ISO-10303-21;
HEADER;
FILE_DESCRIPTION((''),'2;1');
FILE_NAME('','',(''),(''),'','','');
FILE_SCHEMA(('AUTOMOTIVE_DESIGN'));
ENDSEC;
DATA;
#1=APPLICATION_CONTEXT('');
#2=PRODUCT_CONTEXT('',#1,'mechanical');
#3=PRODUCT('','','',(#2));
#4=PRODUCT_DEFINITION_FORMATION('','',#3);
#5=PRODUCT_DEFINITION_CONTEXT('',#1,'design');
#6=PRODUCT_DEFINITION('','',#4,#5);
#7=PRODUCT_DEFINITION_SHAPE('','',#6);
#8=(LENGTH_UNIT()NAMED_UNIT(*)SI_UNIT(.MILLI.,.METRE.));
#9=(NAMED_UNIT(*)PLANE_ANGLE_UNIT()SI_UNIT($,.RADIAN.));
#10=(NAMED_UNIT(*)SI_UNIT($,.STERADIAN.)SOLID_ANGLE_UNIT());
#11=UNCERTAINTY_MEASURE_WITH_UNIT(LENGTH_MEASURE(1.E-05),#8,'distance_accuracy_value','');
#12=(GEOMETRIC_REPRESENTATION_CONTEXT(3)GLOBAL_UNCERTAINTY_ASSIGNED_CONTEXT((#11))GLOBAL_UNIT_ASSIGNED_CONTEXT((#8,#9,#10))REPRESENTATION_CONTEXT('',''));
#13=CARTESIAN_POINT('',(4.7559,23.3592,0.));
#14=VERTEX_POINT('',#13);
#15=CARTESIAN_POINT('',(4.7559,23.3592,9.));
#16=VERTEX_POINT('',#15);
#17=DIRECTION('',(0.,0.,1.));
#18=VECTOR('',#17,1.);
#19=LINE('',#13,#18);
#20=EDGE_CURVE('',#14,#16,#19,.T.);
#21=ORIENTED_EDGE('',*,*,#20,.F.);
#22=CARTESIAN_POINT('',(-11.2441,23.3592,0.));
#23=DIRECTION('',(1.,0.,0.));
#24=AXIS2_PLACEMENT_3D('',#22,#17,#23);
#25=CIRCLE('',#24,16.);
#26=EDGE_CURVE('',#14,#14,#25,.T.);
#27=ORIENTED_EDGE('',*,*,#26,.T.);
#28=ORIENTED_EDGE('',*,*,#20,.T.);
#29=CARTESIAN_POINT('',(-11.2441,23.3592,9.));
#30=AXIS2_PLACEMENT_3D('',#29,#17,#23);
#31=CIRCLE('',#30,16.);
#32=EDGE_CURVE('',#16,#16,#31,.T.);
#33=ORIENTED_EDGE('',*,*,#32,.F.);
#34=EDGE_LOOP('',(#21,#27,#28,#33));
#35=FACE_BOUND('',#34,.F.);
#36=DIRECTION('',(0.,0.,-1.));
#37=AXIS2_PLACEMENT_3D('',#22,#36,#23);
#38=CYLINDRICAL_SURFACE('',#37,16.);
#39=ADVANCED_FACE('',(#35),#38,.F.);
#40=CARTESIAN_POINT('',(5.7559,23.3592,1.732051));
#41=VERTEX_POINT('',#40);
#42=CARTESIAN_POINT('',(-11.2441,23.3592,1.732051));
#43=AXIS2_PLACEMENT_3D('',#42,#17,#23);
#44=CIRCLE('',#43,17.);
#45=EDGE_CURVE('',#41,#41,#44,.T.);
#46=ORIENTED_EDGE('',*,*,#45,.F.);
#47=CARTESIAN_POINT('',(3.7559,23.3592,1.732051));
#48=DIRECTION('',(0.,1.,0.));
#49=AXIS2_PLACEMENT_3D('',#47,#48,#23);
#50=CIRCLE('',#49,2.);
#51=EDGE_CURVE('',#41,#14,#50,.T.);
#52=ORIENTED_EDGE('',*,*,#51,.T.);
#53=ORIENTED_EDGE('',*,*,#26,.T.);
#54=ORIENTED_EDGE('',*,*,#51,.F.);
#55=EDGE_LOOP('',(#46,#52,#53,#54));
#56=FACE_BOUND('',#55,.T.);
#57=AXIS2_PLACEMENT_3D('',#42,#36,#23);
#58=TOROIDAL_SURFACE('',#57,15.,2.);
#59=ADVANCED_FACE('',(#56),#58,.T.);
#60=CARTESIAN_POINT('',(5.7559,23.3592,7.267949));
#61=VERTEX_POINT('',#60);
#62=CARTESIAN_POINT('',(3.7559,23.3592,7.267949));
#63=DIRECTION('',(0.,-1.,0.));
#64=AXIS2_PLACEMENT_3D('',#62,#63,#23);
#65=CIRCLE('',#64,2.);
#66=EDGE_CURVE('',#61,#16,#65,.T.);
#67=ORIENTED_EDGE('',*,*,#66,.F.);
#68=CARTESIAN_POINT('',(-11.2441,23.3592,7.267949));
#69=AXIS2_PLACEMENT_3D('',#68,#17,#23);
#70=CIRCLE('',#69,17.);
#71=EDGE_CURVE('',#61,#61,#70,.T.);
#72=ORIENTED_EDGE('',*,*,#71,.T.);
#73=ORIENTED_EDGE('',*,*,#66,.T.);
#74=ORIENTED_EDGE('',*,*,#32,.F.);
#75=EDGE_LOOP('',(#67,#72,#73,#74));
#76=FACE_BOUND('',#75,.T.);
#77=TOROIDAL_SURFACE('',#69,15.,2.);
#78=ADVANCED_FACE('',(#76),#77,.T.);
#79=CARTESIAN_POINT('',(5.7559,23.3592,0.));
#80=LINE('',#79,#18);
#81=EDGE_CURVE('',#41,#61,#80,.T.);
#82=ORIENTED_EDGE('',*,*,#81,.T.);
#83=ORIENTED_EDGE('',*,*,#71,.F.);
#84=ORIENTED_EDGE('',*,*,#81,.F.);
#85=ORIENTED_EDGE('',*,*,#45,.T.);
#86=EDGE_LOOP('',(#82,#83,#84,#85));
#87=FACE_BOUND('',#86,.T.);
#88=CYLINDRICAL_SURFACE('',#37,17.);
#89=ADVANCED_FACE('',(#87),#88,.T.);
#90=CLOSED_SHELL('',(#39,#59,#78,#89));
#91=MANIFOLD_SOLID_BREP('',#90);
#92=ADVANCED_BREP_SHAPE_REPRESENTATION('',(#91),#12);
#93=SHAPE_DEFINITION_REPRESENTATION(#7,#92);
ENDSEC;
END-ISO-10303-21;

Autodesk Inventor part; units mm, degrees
ref_plane "YZ Plane" through (0, 0, 0) normal (1, 0, 0) x (0, 1, 0)
ref_plane "XZ Plane" through (0, 0, 0) normal (0, 1, 0) x (-1, 0, 0)
ref_plane "XY Plane" through (0, 0, 0) normal (0, 0, 1) x (1, 0, 0)
ref_plane "Work Plane1" through (0, 0, 0) normal (0, 0, 1) x (1, 0, 0)
sketch "Sketch1" plane through (0, 0, 0) normal (0, 0, 1) x (1, 0, 0)
  circle A0 centre (-11.2441, 23.3592) radius 16
  circle A1 centre (-11.2441, 23.3592) radius 17
  point P0 (0, 0)
  dimension "d0" = 32
  dimension "d1" = 34
extrude "Extrusion1" add sketch "Sketch1" along normal blind 9
fillet "Fillet1" radius 2 1 edges at (-28.2441, 23.3592, 9)
fillet "Fillet2" radius 2 1 edges at (-28.2441, 23.3592, 0)
properties part number "Tire"
